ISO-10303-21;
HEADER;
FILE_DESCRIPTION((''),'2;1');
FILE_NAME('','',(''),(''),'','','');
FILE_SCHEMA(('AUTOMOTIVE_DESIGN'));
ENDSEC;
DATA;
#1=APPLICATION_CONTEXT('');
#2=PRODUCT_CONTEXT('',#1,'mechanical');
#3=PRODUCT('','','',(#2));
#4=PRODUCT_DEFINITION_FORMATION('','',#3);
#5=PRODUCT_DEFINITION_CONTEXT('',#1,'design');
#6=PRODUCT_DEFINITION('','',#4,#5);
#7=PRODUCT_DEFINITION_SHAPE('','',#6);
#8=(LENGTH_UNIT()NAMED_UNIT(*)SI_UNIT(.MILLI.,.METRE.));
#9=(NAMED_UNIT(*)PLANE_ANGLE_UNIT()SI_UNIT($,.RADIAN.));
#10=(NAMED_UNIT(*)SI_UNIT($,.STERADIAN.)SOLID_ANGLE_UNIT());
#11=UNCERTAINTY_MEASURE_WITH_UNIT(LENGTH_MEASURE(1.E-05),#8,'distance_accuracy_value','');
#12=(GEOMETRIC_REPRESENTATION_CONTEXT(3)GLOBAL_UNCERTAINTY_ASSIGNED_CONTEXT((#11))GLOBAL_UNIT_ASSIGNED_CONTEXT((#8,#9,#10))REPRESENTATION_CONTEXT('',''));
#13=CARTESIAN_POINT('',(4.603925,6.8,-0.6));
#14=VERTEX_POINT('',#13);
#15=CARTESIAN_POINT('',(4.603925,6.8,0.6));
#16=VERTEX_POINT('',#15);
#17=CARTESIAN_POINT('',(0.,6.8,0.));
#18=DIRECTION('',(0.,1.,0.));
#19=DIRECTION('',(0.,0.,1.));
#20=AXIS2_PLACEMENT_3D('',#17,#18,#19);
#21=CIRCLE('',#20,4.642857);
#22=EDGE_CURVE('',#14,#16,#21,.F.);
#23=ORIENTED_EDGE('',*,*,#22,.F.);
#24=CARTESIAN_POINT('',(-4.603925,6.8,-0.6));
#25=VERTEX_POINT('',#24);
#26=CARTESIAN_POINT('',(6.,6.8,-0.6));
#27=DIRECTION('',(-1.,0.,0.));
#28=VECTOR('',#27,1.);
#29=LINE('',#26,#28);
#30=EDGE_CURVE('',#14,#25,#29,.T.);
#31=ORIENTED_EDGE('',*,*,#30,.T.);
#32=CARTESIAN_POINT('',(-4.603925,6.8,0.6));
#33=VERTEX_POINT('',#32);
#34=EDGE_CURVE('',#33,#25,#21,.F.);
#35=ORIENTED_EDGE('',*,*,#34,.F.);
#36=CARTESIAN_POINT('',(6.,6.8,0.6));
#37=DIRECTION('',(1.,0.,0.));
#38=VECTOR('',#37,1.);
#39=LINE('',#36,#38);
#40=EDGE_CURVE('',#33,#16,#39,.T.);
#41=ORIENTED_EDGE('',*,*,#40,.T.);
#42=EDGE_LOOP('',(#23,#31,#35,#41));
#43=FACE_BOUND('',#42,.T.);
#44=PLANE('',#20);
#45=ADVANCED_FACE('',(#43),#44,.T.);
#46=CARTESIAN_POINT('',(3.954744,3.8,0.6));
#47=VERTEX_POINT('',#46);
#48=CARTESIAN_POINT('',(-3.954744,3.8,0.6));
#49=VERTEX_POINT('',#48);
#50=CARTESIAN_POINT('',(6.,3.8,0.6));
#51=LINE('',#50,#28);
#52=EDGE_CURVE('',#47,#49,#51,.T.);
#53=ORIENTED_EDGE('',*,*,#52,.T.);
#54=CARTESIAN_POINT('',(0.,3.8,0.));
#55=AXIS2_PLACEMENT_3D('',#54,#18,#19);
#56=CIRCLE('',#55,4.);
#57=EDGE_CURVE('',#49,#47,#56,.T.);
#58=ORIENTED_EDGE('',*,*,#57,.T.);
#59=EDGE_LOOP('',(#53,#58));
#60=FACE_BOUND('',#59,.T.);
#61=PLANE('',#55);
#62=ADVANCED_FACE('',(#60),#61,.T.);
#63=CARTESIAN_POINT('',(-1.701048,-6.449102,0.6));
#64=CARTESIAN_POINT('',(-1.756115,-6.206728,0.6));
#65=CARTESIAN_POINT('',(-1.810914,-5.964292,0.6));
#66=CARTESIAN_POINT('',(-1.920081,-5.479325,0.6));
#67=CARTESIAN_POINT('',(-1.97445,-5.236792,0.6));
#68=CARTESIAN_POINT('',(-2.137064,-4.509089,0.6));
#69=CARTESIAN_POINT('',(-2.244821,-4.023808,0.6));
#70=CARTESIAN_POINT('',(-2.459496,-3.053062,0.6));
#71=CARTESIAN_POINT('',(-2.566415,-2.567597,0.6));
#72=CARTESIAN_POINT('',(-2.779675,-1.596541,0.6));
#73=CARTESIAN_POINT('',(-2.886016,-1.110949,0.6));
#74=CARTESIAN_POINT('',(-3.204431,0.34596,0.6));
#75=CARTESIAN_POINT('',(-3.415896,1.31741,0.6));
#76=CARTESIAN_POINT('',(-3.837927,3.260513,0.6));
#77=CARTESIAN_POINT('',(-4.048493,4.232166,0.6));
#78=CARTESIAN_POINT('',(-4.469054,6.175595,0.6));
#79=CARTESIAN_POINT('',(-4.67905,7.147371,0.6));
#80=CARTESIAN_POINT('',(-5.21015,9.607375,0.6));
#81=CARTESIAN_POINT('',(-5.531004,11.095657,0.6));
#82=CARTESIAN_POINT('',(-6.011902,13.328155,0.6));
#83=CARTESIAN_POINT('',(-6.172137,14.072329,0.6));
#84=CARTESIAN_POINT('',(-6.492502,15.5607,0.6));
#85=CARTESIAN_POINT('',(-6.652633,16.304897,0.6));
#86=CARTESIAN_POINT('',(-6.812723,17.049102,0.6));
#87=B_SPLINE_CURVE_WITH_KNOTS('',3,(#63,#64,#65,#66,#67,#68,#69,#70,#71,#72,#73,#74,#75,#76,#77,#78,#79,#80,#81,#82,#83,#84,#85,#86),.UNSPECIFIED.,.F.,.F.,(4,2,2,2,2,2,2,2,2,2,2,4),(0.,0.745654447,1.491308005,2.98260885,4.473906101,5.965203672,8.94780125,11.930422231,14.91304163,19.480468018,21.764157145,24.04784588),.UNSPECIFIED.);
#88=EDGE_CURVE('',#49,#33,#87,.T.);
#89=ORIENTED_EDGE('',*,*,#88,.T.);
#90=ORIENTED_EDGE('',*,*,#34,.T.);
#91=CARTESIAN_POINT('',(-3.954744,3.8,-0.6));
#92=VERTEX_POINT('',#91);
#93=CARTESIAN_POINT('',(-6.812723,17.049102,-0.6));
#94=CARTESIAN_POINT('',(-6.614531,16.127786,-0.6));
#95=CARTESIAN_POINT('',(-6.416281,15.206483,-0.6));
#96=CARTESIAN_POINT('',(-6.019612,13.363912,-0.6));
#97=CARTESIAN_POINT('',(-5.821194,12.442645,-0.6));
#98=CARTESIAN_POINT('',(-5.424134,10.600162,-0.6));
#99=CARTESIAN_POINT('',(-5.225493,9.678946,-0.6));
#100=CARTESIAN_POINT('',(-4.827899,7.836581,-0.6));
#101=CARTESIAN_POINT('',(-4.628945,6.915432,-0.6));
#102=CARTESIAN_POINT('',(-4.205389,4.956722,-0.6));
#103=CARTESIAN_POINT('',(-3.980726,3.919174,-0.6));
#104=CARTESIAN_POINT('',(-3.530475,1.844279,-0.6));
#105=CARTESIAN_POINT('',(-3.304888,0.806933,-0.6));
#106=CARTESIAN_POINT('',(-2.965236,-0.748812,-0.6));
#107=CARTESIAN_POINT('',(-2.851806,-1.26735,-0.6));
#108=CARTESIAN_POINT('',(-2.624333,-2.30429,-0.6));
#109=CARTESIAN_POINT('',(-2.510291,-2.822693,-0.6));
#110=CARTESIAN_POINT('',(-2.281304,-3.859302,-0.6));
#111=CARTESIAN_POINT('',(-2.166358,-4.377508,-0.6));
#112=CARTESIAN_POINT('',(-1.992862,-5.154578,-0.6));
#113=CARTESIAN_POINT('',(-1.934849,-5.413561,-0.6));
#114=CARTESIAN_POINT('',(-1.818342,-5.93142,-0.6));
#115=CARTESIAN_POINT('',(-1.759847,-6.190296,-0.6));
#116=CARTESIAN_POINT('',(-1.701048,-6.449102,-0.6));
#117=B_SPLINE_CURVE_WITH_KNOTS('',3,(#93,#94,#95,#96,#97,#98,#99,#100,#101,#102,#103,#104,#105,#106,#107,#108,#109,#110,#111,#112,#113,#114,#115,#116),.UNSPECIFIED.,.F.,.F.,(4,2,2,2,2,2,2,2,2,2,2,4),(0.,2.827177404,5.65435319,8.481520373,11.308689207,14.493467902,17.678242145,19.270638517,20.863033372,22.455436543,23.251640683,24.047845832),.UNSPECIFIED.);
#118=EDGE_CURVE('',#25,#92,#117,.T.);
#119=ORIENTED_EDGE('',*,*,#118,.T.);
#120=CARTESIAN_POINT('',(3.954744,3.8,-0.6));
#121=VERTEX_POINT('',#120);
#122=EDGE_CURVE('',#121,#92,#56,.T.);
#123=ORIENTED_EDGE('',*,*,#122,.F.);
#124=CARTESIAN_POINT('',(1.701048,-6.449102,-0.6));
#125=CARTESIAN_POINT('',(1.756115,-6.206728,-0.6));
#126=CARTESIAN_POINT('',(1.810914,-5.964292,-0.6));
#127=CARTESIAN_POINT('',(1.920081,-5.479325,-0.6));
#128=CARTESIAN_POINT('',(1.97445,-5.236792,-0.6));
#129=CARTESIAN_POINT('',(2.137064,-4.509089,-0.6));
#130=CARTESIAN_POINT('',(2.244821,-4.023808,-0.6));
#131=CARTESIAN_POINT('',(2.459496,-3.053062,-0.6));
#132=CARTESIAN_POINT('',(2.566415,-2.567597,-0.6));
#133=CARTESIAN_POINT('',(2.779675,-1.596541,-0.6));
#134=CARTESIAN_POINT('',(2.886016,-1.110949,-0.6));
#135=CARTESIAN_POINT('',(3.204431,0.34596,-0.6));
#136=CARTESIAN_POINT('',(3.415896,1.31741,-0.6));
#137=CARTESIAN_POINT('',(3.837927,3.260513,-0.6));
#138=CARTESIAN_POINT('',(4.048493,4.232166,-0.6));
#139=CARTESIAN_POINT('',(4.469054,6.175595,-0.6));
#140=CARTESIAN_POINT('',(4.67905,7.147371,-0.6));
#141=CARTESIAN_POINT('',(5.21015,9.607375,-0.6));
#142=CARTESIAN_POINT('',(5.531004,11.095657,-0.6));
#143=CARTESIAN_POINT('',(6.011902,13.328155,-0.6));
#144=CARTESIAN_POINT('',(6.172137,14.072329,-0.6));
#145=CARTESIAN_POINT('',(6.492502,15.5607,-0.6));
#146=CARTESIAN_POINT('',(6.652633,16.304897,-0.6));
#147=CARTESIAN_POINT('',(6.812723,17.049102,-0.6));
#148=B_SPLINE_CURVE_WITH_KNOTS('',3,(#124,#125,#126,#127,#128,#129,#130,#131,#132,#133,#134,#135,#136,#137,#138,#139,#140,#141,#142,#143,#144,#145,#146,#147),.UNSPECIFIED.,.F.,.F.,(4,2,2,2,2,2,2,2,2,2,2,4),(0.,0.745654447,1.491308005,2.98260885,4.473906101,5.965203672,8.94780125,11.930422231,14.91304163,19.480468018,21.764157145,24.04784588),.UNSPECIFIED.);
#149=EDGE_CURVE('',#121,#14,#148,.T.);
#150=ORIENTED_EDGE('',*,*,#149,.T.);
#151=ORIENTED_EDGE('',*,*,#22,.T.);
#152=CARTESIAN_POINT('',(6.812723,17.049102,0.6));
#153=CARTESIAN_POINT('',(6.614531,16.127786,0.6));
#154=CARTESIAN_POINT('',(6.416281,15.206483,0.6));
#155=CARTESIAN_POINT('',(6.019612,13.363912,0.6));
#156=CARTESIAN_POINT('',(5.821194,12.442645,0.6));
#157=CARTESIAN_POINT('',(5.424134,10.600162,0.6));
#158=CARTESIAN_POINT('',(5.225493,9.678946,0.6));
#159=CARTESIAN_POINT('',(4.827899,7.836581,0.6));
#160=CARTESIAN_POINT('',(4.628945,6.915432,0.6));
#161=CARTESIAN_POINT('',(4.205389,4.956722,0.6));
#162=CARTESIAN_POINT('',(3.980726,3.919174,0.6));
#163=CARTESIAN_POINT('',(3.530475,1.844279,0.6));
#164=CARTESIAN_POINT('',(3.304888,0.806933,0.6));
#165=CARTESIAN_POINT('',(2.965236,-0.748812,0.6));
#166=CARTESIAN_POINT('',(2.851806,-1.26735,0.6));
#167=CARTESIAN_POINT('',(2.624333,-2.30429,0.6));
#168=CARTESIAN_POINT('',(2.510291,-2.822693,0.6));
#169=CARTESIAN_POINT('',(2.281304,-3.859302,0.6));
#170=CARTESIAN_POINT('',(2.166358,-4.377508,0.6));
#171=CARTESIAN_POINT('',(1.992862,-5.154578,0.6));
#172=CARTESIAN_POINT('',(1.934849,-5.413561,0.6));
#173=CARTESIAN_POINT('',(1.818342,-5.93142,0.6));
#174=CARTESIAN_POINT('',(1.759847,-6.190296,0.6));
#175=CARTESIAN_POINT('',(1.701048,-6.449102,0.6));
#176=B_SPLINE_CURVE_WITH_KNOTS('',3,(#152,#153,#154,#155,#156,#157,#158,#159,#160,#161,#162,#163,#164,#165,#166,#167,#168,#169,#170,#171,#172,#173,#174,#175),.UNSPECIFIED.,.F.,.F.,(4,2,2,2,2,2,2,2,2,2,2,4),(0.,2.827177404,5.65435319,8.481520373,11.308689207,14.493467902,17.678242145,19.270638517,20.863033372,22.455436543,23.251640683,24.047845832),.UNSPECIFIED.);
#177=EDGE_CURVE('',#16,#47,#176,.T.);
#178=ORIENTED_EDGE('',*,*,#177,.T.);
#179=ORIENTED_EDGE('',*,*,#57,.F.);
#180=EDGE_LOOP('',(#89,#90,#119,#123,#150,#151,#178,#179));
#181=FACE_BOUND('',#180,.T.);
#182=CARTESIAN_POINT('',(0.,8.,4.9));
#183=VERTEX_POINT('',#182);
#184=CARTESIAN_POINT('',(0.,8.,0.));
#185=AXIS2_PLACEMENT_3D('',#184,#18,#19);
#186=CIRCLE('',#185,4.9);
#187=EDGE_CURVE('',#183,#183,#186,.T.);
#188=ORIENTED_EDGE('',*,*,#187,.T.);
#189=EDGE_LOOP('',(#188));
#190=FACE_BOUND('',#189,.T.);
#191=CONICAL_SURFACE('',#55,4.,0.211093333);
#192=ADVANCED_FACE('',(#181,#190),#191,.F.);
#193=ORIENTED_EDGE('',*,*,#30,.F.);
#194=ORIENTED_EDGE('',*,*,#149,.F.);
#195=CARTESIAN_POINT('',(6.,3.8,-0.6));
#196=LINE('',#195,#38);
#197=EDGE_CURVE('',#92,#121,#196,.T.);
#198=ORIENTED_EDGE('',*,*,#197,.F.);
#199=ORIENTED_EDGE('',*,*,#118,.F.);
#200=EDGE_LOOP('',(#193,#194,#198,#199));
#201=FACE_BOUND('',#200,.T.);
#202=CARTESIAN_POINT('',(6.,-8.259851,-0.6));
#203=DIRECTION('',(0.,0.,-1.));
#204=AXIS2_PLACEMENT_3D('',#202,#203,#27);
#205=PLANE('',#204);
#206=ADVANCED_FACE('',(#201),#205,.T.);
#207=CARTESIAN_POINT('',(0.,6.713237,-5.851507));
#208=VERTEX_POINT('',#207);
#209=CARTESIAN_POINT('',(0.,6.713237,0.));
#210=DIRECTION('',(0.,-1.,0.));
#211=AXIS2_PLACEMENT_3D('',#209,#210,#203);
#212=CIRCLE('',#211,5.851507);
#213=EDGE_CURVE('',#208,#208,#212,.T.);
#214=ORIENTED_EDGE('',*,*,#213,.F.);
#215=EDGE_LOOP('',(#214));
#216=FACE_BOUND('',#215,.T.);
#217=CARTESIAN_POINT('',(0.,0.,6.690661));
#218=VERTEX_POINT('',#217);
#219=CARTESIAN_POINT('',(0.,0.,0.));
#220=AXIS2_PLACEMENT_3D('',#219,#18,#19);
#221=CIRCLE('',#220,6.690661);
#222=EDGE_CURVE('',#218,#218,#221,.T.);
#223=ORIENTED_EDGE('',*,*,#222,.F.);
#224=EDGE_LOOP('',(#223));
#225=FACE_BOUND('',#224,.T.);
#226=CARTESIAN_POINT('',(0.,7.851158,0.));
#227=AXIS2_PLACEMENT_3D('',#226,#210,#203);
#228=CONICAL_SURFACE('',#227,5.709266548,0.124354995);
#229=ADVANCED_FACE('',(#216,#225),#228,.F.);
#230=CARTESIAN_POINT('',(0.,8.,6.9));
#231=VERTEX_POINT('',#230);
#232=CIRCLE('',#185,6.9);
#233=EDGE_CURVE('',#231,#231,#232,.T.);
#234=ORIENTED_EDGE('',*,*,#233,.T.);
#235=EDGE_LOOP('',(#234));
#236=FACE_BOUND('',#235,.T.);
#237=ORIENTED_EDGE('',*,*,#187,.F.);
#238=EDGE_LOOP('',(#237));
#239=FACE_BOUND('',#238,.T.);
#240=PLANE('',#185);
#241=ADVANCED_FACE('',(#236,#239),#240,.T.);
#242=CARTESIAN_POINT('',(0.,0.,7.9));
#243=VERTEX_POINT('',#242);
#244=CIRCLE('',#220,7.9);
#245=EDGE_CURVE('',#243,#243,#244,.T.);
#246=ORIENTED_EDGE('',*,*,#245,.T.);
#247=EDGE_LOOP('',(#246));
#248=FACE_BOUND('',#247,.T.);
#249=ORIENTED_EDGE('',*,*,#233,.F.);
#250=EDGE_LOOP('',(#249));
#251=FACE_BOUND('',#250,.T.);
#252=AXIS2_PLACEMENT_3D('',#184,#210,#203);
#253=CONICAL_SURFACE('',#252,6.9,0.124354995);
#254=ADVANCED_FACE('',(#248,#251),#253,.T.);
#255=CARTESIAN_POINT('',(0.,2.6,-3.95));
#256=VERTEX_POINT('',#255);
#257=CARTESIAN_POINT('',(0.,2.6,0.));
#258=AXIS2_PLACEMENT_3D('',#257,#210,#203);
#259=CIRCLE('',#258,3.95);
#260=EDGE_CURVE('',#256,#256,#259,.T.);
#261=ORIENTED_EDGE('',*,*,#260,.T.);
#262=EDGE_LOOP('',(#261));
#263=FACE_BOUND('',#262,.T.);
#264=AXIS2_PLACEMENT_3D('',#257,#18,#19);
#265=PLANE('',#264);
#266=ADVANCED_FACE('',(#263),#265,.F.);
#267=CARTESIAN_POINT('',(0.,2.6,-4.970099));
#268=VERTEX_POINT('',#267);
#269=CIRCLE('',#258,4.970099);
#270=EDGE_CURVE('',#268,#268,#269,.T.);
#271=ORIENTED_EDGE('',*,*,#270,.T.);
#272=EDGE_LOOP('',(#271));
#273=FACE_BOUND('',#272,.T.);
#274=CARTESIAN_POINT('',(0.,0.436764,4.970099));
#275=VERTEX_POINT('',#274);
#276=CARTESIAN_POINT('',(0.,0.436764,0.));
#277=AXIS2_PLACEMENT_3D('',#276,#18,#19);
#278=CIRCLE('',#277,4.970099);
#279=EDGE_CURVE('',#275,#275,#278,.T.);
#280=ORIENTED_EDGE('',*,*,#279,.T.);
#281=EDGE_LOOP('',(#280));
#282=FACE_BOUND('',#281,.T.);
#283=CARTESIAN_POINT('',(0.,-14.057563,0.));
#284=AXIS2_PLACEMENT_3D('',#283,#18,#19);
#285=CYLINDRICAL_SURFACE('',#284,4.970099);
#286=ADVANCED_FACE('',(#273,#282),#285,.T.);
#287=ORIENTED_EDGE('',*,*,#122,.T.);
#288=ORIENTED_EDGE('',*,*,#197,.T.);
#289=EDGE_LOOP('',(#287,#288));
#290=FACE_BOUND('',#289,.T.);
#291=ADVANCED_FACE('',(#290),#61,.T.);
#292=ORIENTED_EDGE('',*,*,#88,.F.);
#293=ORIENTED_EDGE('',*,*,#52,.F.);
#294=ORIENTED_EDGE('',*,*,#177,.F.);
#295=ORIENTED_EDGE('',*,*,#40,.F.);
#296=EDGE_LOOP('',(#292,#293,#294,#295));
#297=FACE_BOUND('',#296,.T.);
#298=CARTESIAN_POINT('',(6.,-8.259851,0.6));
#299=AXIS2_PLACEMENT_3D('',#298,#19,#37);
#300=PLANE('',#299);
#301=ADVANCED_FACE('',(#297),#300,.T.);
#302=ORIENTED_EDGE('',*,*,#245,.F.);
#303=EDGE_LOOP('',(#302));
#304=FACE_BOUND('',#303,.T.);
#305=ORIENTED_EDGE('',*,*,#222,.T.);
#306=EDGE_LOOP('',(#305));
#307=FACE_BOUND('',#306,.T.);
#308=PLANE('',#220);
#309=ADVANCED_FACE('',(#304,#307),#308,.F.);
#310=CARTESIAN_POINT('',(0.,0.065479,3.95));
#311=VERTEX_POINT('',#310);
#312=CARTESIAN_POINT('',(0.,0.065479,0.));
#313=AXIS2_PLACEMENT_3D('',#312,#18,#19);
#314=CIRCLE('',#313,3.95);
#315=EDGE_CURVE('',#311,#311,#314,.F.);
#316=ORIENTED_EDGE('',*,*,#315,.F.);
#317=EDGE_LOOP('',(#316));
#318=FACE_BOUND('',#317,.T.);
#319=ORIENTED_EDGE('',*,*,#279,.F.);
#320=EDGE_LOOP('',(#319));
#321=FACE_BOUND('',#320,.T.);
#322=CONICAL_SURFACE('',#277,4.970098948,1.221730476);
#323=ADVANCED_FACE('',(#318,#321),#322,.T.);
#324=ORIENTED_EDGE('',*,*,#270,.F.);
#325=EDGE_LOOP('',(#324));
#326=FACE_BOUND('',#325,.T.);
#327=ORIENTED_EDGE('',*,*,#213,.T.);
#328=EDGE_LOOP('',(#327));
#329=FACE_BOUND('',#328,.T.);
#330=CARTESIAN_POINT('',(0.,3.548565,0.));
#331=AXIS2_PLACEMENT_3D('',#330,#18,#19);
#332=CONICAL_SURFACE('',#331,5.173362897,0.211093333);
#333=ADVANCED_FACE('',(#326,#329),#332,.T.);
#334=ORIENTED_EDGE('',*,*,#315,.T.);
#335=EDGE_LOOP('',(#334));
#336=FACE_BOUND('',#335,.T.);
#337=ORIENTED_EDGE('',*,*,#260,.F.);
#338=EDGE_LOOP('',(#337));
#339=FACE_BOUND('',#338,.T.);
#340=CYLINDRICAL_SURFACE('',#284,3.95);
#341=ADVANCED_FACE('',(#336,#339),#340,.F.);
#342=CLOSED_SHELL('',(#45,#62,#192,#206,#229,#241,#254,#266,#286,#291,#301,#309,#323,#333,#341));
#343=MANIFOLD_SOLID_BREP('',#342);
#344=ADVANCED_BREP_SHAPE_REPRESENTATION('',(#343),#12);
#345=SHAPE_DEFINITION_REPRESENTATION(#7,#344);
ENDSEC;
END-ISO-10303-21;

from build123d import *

# Parameters (mm, degrees)
SKETCH1_R           = 7.9
SKETCH2_R           = 6.9
SKETCH4_R           = 4
SKETCH3_R           = 4.9
SKETCH7_W           = 12
SKETCH7_H           = 1.2
BOSS_EXTRUDE2_DEPTH = 3
SKETCH8_R           = 4.970098948
SKETCH8_R_2         = 3.95
BOSS_EXTRUDE3_DEPTH = 2.6
CHAMFER1_SIZE       = 0.436764281
CHAMFER1_SIZE_2     = 1.2


# Read off the part's stored shape, not the designer's step: Shell1
with BuildPart() as part:
    # Sketch1 → Loft1 section 0
    with BuildSketch(Plane(origin=(0, 0, 0), x_dir=(1, 0, 0), z_dir=(0, 1, 0))):
        Circle(SKETCH1_R)
    # Sketch2 → Loft1 section 1
    with BuildSketch(Plane(origin=(0, 8, 0), x_dir=(1, 0, 0), z_dir=(0, 1, 0))):
        Circle(SKETCH2_R)
    loft()

    # Sketch4 → Cut-Loft2 section 0
    with BuildSketch(Plane(origin=(0, 3.8, 0), x_dir=(1, 0, 0), z_dir=(0, 1, 0))):
        Circle(SKETCH4_R)
    # Sketch3 → Cut-Loft2 section 1
    with BuildSketch(Plane(origin=(0, 8, 0), x_dir=(1, 0, 0), z_dir=(0, 1, 0))):
        Circle(SKETCH3_R)
    loft(mode=Mode.SUBTRACT)

    # Sketch7 → Boss-Extrude2 (add)
    with BuildSketch(Plane(origin=(0, 6.8, 0), x_dir=(1, 0, 0), z_dir=(0, 1, 0))):
        Rectangle(SKETCH7_W, SKETCH7_H)
    extrude(amount=-BOSS_EXTRUDE2_DEPTH)

    # Shell1 outline → Shell1 (revolve, cut)
    with BuildSketch(Plane.XY):
        Polygon((5.851506773, 6.713236516), (4.970098948, 2.6), (0, 2.6), (0, 0), (6.690661338, 0), align=None)
    revolve(axis=Axis((0, 0, 0), (0, 1, 0)), mode=Mode.SUBTRACT)

    # Sketch8 → Boss-Extrude3 (add)
    with BuildSketch(Plane.XZ.offset(-2.6)):
        with Locations(Location((0, 0, 0), (0, 0, 90))):
            Circle(SKETCH8_R)
        with Locations(Location((0, 0, 0), (0, 0, 90))):
            Circle(SKETCH8_R_2, mode=Mode.SUBTRACT)
    extrude(amount=BOSS_EXTRUDE3_DEPTH)

    # Chamfer1
    # the kernel refuses this chamfer: 1.2, 0.436764281 mm, written as the material it takes off along each edge
    with BuildSketch(Plane(origin=(0, 0, 0), x_dir=(0, 0, 1), z_dir=(1, 0, 0))) as chamfer1_piece_1:
        Polygon((4.970098948, -CHAMFER1_SIZE), (4.970098948 - CHAMFER1_SIZE_2, 0), (4.970098948, 0), align=None)
    revolve(axis=Axis((0, 0, 0), (0, -1, 0)), mode=Mode.SUBTRACT)


solid = part.part
